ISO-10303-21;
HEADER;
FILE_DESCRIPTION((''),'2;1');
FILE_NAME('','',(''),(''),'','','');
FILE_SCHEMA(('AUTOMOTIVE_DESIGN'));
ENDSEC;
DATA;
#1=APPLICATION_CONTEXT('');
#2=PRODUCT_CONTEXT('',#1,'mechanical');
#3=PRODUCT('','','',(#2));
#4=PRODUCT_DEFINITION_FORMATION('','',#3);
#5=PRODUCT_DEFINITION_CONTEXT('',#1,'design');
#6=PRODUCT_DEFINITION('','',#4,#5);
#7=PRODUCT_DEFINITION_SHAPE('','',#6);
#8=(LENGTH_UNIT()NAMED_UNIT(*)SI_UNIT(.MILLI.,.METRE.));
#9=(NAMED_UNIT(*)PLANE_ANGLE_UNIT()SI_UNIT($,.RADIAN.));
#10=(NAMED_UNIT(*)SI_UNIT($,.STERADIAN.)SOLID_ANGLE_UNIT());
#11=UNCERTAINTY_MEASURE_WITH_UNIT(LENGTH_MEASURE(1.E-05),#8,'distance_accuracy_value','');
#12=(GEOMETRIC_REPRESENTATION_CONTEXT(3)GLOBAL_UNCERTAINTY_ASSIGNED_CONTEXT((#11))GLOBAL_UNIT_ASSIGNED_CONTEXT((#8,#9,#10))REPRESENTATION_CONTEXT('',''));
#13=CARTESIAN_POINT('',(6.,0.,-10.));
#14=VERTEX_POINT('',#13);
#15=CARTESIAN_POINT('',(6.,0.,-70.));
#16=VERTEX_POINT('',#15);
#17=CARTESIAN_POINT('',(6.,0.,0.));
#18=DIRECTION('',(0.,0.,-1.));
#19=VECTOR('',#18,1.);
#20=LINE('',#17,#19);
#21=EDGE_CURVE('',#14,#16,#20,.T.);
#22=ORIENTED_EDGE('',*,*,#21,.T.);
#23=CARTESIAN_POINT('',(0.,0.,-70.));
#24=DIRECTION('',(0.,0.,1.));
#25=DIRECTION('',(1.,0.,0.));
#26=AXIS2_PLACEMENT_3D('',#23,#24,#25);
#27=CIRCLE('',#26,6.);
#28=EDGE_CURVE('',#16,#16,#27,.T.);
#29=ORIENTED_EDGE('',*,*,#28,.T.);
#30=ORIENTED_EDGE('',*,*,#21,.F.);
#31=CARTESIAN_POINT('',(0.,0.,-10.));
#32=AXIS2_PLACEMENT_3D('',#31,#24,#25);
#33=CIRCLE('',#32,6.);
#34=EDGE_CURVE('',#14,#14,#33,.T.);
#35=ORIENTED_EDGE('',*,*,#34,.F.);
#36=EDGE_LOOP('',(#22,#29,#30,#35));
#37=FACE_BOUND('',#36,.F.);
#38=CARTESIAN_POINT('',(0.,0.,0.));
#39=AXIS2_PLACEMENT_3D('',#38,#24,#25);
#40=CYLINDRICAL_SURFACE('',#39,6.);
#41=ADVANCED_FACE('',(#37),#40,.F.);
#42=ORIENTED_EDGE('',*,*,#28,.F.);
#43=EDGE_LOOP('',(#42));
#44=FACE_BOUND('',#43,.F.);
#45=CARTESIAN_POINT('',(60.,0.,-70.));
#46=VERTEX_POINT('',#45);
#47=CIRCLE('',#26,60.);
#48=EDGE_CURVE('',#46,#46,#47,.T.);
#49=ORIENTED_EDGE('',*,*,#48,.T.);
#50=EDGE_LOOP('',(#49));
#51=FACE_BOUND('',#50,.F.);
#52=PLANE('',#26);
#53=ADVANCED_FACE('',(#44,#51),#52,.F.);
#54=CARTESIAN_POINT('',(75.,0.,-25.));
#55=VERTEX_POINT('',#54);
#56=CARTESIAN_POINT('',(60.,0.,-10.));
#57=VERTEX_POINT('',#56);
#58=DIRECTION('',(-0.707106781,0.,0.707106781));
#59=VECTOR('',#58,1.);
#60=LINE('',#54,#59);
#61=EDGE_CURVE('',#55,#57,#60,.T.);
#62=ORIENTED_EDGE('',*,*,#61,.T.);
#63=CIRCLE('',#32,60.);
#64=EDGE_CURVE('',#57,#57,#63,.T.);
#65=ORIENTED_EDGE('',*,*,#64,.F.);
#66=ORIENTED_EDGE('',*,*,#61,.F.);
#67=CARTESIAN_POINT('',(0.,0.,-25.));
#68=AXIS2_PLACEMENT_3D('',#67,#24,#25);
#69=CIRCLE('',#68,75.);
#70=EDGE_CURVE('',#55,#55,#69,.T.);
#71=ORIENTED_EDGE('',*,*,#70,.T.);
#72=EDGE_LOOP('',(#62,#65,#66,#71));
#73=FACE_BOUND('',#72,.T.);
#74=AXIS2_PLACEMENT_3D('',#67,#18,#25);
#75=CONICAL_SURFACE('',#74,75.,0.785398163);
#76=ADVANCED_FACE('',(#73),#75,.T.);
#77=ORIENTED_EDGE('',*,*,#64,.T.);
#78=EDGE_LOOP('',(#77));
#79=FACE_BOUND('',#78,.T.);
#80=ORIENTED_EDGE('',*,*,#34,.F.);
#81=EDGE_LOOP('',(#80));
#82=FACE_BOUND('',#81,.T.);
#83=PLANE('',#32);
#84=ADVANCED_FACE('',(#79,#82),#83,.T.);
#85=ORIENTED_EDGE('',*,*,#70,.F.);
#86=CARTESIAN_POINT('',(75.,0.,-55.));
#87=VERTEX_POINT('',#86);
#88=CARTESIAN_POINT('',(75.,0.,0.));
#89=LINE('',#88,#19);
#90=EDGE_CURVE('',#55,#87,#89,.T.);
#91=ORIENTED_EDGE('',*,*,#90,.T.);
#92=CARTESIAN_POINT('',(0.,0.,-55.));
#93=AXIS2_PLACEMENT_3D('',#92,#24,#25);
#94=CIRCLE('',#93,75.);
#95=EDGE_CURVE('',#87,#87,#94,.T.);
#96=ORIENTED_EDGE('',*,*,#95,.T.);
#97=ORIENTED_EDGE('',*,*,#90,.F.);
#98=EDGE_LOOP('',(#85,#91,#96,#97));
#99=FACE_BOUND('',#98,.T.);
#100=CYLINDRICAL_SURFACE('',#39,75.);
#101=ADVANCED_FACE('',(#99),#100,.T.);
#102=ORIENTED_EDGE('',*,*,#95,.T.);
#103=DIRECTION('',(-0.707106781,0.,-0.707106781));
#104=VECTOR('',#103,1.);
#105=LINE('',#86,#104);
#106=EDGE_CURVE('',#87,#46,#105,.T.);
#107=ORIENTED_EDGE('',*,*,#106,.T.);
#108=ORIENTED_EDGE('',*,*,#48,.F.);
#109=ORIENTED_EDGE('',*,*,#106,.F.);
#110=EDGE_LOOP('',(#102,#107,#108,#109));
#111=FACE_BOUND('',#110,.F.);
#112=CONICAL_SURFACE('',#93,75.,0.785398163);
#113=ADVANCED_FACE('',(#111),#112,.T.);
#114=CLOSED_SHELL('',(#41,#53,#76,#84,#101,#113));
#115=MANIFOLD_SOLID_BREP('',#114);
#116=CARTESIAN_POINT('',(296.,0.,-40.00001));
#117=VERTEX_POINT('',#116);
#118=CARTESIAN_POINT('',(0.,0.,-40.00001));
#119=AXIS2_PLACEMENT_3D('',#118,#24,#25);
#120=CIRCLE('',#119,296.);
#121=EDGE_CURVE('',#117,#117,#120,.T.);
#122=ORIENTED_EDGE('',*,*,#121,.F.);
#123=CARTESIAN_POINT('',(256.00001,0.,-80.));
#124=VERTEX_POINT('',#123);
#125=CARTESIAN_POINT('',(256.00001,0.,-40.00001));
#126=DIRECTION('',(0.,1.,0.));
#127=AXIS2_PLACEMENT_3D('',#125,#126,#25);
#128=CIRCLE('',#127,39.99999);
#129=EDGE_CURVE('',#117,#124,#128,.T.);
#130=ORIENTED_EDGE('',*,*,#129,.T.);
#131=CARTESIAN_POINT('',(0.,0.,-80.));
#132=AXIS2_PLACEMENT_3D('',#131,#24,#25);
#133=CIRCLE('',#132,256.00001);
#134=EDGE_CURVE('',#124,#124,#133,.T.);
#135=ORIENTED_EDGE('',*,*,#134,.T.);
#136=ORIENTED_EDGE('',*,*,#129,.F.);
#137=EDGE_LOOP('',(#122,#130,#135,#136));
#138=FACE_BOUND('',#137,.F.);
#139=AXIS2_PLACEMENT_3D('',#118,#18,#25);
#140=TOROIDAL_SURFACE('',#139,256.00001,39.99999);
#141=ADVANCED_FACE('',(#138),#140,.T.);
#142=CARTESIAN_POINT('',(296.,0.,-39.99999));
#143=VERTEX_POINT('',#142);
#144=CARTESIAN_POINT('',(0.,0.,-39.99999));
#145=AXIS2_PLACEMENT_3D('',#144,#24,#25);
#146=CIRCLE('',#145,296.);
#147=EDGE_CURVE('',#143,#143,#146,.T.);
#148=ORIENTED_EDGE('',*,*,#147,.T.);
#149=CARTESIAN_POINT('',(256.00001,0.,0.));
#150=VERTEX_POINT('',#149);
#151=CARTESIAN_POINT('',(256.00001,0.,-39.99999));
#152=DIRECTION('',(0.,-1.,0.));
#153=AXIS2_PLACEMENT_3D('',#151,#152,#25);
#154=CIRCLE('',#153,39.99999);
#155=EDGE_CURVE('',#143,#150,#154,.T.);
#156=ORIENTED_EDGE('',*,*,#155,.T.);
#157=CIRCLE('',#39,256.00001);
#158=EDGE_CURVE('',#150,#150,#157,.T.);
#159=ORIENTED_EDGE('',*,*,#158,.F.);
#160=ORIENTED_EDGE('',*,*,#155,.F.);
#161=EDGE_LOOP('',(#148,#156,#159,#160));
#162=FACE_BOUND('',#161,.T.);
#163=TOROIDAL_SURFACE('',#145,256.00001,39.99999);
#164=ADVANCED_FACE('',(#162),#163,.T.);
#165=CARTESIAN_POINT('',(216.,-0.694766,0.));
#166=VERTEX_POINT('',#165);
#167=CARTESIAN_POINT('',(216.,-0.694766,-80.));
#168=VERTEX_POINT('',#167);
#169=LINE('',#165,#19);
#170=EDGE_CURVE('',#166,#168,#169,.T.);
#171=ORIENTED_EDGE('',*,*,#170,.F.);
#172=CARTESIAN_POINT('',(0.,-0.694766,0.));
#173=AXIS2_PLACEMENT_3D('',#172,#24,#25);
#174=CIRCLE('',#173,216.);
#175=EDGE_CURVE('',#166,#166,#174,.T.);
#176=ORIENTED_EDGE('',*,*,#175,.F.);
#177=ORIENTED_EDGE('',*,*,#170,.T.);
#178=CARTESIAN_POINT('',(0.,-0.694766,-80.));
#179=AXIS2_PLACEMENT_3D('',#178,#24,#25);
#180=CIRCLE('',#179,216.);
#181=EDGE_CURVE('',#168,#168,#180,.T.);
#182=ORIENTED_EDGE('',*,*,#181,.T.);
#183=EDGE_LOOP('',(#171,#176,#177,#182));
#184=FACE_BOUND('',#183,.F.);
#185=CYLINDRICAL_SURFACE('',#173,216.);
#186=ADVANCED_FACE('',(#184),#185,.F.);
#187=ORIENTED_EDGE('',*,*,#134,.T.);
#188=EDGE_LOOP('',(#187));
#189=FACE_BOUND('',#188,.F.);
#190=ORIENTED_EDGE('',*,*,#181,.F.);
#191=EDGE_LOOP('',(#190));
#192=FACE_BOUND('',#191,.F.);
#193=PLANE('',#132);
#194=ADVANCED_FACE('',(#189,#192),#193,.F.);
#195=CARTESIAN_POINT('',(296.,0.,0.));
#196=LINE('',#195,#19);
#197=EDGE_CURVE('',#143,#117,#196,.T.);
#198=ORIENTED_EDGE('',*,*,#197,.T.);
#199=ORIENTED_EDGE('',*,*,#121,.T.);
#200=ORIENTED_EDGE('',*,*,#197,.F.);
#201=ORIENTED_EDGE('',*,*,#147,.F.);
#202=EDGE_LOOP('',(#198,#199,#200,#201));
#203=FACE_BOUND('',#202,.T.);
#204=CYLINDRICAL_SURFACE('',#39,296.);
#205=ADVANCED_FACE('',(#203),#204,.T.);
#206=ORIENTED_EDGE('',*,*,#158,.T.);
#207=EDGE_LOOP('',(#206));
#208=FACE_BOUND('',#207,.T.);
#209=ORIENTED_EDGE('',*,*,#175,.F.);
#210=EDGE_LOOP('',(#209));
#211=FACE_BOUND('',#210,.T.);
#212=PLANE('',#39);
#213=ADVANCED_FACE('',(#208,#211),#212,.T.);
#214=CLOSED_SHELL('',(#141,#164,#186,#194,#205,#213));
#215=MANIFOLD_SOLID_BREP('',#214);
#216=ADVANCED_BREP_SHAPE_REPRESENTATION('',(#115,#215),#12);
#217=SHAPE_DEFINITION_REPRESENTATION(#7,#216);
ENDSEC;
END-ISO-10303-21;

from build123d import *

# Parameters (mm, degrees)
F0_R     = 296
F0_R_2   = 216
F1_DEPTH = 80
F2_R     = 39.99999
F0_R_3   = 75
F0_R_4   = 6
F3_DEPTH = 70
F4_DEPTH = 10
F5_SIZE  = 15


# Not quite as in the source:
# - a fillet or chamfer is up to 0.001 mm smaller than in the source, because OpenCascade refuses the exact size


with BuildPart() as f1:
    # F0 (on Top) → F1 (new body)
    with BuildSketch(Plane.XY):
        Circle(F0_R)
        with Locations((0, -0.6947662914)):
            Circle(F0_R_2, mode=Mode.SUBTRACT)
    extrude(amount=-F1_DEPTH)

    # F2 (radius 40 in the source; OpenCascade refuses exactly that, so slightly less here)
    f2_edges = [f1.edges().sort_by_distance(p)[0] for p in [
        (-296, 0, 0),
        (-296, 0, -80),
    ]]
    fillet(f2_edges, radius=F2_R)


with BuildPart() as f3:
    # F0 (on Top) → F3 (new body)
    with BuildSketch(Plane.XY):
        Circle(F0_R_3)
        Circle(F0_R_4, mode=Mode.SUBTRACT)
    extrude(amount=-F3_DEPTH)

    # F4 (cut): a face of the model
    f4_faces = [f3.faces().sort_by_distance(p)[0] for p in [
        (-72.8786796564, 0, 0),
    ]]
    extrude(f4_faces, amount=-F4_DEPTH, mode=Mode.SUBTRACT)

    # F5
    f5_edges = [f3.edges().sort_by_distance(p)[0] for p in [
        (-75, 0, -10),
        (-75, 0, -70),
    ]]
    chamfer(f5_edges, length=F5_SIZE)


solid = Compound([f1.part, f3.part])
